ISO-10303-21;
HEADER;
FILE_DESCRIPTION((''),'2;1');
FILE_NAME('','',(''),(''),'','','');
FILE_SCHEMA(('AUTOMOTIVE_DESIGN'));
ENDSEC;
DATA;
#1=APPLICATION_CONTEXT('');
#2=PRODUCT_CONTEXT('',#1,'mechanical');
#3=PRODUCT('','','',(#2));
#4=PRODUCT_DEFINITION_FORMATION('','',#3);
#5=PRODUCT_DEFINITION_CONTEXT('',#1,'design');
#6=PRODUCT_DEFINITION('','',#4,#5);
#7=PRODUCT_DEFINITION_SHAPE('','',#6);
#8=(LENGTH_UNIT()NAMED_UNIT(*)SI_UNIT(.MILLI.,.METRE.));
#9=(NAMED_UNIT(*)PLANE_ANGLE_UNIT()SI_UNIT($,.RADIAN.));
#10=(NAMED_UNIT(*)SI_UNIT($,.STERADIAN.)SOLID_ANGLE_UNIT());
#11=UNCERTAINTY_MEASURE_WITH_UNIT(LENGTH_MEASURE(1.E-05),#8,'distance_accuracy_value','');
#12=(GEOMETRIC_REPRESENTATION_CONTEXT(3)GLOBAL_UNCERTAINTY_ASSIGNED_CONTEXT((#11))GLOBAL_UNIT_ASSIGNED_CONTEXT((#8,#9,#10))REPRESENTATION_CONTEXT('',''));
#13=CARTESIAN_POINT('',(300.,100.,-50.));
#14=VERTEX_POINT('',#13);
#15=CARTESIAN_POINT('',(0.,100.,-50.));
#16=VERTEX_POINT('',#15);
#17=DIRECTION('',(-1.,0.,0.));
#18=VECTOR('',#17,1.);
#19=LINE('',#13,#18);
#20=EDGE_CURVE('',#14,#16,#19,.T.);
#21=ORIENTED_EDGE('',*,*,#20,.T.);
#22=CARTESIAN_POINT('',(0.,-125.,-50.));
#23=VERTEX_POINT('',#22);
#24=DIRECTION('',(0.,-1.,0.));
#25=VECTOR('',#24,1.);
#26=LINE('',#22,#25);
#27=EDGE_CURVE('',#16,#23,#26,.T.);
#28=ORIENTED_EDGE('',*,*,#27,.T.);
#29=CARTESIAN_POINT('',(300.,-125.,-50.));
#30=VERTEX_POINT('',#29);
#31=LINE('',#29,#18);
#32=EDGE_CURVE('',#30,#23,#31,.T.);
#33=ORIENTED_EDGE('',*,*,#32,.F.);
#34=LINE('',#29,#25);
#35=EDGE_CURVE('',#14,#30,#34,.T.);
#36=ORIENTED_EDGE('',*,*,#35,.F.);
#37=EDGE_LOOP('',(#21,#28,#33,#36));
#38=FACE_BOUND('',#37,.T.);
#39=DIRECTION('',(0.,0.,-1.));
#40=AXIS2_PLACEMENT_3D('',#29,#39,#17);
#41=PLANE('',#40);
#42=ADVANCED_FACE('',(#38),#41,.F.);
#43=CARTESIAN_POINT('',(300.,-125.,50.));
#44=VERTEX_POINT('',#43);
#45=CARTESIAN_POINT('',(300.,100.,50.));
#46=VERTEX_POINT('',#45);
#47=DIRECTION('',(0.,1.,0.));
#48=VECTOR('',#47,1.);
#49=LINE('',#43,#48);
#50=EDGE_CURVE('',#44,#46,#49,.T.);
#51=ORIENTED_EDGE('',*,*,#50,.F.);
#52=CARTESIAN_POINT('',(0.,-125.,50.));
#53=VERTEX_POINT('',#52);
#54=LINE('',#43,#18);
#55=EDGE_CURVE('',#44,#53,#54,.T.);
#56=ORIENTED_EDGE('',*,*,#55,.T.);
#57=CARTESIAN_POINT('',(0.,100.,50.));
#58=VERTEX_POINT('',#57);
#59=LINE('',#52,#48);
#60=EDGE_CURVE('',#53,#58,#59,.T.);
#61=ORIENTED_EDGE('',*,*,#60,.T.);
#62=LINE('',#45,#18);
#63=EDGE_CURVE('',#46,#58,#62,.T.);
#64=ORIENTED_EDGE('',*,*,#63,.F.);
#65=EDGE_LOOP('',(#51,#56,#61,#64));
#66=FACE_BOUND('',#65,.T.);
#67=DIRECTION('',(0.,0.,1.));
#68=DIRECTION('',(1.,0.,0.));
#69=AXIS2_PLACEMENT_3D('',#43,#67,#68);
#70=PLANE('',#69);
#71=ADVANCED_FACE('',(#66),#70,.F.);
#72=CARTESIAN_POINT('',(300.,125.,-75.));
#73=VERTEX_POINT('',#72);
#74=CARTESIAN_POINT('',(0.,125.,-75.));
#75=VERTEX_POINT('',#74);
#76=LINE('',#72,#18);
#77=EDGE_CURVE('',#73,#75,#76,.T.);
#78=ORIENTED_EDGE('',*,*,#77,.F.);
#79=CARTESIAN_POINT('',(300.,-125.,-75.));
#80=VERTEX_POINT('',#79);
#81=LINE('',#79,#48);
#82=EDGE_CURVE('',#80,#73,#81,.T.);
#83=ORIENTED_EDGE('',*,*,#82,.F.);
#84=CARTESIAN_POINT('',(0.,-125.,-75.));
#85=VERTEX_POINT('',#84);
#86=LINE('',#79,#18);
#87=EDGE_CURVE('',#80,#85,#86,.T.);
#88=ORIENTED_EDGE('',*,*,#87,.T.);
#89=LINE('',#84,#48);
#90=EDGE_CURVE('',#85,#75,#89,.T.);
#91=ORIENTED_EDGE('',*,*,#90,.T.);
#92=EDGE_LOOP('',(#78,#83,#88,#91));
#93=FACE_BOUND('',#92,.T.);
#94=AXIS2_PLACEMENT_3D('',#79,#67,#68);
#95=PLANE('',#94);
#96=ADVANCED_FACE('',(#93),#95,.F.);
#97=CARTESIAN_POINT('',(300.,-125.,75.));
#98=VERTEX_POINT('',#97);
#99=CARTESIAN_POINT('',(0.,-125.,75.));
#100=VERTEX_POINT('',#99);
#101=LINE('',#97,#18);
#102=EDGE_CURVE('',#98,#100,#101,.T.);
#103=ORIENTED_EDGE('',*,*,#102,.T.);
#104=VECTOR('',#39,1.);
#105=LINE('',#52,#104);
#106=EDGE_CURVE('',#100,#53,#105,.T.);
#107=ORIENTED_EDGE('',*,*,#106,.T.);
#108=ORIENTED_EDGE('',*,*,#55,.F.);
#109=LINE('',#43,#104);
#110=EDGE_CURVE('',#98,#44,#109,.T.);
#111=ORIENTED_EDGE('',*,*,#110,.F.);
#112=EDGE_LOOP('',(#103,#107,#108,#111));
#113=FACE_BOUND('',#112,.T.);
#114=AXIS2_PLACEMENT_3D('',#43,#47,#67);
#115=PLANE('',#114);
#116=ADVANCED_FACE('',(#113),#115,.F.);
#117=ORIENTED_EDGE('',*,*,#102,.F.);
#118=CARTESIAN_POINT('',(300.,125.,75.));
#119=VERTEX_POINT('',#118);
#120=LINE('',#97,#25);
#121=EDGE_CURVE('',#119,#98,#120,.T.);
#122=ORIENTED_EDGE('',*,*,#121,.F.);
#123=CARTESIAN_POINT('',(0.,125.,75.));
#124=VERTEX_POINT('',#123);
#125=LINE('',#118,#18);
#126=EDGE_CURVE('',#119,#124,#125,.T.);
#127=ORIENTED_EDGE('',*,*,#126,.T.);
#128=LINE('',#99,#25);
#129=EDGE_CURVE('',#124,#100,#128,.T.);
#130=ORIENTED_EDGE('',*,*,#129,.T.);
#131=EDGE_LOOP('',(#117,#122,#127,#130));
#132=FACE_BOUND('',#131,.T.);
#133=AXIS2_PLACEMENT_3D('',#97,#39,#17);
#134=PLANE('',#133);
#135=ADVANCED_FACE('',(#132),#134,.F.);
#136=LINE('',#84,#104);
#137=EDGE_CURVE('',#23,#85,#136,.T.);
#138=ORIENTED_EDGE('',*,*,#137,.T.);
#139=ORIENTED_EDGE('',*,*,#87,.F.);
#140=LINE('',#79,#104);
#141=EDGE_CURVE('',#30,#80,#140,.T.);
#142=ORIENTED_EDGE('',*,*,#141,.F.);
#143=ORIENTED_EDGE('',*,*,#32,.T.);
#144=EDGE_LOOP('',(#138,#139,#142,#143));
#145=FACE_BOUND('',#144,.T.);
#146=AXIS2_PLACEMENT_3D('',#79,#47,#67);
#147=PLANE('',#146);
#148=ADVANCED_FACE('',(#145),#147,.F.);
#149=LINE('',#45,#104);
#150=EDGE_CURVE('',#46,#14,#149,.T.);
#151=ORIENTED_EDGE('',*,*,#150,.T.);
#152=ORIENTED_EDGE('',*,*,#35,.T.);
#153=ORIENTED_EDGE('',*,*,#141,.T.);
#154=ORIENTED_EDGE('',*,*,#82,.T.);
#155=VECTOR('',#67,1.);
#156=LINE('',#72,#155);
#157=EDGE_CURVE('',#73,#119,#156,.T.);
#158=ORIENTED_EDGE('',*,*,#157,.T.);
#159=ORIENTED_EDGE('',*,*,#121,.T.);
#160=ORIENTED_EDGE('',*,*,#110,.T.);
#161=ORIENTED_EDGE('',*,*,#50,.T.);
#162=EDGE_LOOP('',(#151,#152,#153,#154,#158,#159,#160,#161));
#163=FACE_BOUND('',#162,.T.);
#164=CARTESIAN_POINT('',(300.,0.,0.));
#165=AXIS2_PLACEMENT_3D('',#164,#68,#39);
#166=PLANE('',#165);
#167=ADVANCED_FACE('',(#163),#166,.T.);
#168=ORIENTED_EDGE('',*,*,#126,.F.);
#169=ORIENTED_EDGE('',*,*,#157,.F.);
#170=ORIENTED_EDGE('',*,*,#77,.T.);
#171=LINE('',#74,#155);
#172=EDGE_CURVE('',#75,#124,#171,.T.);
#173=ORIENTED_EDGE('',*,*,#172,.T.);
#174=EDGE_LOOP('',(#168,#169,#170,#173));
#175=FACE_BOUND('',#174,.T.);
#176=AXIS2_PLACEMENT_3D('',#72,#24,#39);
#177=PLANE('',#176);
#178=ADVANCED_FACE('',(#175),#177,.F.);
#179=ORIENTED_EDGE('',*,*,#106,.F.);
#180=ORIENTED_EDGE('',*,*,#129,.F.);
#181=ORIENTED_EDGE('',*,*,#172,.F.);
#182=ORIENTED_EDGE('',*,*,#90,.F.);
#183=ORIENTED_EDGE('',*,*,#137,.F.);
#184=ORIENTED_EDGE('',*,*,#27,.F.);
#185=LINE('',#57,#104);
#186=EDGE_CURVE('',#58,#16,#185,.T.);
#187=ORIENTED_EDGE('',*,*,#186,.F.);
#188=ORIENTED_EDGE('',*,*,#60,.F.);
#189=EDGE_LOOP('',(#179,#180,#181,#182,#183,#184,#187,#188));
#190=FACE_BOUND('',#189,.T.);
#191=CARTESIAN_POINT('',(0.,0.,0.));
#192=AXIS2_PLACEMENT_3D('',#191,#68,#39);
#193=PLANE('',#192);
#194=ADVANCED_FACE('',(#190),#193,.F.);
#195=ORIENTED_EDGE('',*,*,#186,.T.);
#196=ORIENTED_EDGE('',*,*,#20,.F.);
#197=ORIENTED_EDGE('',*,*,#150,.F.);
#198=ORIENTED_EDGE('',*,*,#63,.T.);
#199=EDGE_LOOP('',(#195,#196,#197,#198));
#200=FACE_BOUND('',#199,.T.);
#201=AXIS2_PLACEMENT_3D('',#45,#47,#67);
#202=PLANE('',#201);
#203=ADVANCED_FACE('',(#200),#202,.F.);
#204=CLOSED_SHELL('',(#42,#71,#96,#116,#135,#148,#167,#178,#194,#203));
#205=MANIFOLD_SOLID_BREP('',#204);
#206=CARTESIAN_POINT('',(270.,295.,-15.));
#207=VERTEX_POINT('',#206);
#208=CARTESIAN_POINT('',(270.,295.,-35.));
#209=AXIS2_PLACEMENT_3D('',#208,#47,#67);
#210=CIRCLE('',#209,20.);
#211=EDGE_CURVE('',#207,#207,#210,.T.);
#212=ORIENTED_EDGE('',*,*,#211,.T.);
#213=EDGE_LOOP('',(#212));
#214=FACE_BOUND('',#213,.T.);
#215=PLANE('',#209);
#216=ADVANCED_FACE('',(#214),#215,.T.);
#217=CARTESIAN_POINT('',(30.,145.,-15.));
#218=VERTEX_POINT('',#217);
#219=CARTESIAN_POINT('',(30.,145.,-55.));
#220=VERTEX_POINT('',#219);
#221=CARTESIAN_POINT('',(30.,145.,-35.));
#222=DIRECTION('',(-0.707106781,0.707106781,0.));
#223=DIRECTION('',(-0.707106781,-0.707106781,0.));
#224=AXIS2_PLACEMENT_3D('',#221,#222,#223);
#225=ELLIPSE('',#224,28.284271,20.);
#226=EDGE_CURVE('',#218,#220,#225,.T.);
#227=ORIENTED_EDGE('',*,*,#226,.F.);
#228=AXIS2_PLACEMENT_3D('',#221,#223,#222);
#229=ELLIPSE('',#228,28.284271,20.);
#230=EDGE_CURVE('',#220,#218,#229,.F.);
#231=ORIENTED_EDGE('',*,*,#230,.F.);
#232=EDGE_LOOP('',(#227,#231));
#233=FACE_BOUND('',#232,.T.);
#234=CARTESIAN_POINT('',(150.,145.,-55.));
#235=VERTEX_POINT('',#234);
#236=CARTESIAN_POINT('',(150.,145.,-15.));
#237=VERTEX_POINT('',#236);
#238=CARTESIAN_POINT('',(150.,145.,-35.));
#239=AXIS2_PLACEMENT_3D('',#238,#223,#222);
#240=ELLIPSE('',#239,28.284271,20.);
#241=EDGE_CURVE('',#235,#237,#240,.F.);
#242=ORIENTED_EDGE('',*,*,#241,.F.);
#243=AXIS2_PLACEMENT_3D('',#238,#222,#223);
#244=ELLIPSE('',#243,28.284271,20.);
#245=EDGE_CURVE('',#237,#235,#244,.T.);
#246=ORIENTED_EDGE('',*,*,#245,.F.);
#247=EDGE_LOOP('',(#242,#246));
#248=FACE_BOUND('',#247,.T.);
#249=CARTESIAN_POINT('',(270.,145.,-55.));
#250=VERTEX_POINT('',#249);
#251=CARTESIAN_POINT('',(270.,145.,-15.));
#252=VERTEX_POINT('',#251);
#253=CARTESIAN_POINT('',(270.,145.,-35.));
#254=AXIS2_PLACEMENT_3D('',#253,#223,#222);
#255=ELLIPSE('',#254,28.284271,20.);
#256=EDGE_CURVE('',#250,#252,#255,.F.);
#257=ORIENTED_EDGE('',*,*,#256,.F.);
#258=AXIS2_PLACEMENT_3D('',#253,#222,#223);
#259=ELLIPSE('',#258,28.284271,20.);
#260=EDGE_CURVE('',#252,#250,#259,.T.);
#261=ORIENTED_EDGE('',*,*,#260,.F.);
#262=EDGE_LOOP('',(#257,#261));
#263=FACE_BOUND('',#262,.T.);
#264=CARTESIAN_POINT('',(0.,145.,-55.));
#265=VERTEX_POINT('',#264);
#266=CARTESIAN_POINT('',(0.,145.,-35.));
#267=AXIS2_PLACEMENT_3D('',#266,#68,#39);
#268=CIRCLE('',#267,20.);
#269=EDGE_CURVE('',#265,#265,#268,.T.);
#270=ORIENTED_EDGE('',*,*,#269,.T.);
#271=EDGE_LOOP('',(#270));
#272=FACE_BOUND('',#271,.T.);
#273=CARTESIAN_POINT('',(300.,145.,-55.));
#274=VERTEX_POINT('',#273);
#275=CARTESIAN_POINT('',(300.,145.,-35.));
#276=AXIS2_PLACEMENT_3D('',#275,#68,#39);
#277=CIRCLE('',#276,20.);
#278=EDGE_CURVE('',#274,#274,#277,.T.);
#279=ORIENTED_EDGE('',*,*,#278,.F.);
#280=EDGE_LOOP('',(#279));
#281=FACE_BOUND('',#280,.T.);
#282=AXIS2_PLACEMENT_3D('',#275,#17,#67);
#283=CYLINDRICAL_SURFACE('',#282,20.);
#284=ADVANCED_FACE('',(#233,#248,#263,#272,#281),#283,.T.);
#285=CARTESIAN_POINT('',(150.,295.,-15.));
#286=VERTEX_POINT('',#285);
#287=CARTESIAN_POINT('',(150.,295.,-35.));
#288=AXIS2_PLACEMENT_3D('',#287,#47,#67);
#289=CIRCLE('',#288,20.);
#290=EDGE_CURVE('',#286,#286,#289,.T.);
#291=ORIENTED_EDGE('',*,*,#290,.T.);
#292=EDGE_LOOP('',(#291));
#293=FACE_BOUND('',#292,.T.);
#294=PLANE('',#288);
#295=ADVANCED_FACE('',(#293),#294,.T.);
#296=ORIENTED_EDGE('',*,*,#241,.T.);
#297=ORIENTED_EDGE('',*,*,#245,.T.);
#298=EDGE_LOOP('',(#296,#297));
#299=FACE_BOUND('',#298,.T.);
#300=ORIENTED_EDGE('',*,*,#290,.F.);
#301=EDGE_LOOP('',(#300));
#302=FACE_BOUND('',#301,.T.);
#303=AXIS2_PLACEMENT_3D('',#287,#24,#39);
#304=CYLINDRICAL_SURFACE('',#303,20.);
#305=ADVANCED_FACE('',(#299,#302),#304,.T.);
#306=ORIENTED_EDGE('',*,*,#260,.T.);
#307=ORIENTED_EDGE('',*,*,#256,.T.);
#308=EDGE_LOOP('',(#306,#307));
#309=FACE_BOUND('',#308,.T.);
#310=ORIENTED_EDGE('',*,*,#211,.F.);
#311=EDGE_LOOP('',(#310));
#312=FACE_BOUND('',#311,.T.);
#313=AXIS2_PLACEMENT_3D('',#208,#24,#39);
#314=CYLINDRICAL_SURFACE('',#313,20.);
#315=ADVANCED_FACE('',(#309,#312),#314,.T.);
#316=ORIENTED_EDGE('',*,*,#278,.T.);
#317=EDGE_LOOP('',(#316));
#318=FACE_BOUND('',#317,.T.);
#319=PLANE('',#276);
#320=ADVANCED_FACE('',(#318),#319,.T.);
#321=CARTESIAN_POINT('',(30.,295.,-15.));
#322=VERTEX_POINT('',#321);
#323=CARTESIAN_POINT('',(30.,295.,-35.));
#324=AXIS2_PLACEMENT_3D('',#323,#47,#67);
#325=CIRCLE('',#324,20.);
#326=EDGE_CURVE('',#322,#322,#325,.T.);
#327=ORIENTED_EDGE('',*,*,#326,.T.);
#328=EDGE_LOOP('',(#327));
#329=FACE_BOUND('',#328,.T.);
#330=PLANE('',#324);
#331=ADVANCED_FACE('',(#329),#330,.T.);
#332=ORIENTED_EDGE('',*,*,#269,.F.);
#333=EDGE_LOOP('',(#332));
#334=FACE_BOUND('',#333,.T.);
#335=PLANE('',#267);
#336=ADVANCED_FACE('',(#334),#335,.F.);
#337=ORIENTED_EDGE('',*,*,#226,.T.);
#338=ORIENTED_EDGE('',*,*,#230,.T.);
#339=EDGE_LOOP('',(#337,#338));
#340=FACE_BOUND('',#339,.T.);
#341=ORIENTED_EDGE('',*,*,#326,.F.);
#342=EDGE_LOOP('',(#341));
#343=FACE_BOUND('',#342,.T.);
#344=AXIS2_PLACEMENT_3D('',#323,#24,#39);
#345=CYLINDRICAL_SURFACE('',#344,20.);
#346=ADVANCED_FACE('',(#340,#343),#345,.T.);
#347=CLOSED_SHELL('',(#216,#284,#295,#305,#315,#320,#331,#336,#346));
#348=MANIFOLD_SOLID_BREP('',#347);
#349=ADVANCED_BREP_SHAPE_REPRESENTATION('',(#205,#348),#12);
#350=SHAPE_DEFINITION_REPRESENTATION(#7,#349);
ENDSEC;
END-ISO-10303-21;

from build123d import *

# Parameters (mm, degrees)
EXTRUDE_1_DEPTH = 300
SKETCH_2_R      = 20
EXTRUDE_2_DEPTH = 300
SKETCH_3_R      = 20
EXTRUDE_3_DEPTH = 150


with BuildPart() as part:
    # 스케치1 → 보스-돌출1 (new body)
    with BuildSketch(Plane(origin=(0, 0, 0), x_dir=(0, 0, -1), z_dir=(1, 0, 0))):
        Polygon((-50, -125), (-75, -125), (-75, 125), (75, 125), (75, -125), (50, -125), (50, 100), (-50, 100), align=None)
    extrude(amount=EXTRUDE_1_DEPTH)


with BuildPart() as body_2:
    # 스케치2 → 보스-돌출2 (new body)
    with BuildSketch(Plane(origin=(0, 0, 0), x_dir=(0, 0, -1), z_dir=(1, 0, 0))):
        with Locations((35, 145)):
            Circle(SKETCH_2_R)
    extrude(amount=EXTRUDE_2_DEPTH)

    # 스케치3 → 보스-돌출3 (add)
    with BuildSketch(Plane(origin=(0, 145, 0), x_dir=(1, 0, 0), z_dir=(0, 1, 0))):
        with Locations((30, 35)):
            Circle(SKETCH_3_R)
        with Locations((150, 35)):
            Circle(SKETCH_3_R)
        with Locations((270, 35)):
            Circle(SKETCH_3_R)
    extrude(amount=EXTRUDE_3_DEPTH)


solid = Compound([part.part, body_2.part])
